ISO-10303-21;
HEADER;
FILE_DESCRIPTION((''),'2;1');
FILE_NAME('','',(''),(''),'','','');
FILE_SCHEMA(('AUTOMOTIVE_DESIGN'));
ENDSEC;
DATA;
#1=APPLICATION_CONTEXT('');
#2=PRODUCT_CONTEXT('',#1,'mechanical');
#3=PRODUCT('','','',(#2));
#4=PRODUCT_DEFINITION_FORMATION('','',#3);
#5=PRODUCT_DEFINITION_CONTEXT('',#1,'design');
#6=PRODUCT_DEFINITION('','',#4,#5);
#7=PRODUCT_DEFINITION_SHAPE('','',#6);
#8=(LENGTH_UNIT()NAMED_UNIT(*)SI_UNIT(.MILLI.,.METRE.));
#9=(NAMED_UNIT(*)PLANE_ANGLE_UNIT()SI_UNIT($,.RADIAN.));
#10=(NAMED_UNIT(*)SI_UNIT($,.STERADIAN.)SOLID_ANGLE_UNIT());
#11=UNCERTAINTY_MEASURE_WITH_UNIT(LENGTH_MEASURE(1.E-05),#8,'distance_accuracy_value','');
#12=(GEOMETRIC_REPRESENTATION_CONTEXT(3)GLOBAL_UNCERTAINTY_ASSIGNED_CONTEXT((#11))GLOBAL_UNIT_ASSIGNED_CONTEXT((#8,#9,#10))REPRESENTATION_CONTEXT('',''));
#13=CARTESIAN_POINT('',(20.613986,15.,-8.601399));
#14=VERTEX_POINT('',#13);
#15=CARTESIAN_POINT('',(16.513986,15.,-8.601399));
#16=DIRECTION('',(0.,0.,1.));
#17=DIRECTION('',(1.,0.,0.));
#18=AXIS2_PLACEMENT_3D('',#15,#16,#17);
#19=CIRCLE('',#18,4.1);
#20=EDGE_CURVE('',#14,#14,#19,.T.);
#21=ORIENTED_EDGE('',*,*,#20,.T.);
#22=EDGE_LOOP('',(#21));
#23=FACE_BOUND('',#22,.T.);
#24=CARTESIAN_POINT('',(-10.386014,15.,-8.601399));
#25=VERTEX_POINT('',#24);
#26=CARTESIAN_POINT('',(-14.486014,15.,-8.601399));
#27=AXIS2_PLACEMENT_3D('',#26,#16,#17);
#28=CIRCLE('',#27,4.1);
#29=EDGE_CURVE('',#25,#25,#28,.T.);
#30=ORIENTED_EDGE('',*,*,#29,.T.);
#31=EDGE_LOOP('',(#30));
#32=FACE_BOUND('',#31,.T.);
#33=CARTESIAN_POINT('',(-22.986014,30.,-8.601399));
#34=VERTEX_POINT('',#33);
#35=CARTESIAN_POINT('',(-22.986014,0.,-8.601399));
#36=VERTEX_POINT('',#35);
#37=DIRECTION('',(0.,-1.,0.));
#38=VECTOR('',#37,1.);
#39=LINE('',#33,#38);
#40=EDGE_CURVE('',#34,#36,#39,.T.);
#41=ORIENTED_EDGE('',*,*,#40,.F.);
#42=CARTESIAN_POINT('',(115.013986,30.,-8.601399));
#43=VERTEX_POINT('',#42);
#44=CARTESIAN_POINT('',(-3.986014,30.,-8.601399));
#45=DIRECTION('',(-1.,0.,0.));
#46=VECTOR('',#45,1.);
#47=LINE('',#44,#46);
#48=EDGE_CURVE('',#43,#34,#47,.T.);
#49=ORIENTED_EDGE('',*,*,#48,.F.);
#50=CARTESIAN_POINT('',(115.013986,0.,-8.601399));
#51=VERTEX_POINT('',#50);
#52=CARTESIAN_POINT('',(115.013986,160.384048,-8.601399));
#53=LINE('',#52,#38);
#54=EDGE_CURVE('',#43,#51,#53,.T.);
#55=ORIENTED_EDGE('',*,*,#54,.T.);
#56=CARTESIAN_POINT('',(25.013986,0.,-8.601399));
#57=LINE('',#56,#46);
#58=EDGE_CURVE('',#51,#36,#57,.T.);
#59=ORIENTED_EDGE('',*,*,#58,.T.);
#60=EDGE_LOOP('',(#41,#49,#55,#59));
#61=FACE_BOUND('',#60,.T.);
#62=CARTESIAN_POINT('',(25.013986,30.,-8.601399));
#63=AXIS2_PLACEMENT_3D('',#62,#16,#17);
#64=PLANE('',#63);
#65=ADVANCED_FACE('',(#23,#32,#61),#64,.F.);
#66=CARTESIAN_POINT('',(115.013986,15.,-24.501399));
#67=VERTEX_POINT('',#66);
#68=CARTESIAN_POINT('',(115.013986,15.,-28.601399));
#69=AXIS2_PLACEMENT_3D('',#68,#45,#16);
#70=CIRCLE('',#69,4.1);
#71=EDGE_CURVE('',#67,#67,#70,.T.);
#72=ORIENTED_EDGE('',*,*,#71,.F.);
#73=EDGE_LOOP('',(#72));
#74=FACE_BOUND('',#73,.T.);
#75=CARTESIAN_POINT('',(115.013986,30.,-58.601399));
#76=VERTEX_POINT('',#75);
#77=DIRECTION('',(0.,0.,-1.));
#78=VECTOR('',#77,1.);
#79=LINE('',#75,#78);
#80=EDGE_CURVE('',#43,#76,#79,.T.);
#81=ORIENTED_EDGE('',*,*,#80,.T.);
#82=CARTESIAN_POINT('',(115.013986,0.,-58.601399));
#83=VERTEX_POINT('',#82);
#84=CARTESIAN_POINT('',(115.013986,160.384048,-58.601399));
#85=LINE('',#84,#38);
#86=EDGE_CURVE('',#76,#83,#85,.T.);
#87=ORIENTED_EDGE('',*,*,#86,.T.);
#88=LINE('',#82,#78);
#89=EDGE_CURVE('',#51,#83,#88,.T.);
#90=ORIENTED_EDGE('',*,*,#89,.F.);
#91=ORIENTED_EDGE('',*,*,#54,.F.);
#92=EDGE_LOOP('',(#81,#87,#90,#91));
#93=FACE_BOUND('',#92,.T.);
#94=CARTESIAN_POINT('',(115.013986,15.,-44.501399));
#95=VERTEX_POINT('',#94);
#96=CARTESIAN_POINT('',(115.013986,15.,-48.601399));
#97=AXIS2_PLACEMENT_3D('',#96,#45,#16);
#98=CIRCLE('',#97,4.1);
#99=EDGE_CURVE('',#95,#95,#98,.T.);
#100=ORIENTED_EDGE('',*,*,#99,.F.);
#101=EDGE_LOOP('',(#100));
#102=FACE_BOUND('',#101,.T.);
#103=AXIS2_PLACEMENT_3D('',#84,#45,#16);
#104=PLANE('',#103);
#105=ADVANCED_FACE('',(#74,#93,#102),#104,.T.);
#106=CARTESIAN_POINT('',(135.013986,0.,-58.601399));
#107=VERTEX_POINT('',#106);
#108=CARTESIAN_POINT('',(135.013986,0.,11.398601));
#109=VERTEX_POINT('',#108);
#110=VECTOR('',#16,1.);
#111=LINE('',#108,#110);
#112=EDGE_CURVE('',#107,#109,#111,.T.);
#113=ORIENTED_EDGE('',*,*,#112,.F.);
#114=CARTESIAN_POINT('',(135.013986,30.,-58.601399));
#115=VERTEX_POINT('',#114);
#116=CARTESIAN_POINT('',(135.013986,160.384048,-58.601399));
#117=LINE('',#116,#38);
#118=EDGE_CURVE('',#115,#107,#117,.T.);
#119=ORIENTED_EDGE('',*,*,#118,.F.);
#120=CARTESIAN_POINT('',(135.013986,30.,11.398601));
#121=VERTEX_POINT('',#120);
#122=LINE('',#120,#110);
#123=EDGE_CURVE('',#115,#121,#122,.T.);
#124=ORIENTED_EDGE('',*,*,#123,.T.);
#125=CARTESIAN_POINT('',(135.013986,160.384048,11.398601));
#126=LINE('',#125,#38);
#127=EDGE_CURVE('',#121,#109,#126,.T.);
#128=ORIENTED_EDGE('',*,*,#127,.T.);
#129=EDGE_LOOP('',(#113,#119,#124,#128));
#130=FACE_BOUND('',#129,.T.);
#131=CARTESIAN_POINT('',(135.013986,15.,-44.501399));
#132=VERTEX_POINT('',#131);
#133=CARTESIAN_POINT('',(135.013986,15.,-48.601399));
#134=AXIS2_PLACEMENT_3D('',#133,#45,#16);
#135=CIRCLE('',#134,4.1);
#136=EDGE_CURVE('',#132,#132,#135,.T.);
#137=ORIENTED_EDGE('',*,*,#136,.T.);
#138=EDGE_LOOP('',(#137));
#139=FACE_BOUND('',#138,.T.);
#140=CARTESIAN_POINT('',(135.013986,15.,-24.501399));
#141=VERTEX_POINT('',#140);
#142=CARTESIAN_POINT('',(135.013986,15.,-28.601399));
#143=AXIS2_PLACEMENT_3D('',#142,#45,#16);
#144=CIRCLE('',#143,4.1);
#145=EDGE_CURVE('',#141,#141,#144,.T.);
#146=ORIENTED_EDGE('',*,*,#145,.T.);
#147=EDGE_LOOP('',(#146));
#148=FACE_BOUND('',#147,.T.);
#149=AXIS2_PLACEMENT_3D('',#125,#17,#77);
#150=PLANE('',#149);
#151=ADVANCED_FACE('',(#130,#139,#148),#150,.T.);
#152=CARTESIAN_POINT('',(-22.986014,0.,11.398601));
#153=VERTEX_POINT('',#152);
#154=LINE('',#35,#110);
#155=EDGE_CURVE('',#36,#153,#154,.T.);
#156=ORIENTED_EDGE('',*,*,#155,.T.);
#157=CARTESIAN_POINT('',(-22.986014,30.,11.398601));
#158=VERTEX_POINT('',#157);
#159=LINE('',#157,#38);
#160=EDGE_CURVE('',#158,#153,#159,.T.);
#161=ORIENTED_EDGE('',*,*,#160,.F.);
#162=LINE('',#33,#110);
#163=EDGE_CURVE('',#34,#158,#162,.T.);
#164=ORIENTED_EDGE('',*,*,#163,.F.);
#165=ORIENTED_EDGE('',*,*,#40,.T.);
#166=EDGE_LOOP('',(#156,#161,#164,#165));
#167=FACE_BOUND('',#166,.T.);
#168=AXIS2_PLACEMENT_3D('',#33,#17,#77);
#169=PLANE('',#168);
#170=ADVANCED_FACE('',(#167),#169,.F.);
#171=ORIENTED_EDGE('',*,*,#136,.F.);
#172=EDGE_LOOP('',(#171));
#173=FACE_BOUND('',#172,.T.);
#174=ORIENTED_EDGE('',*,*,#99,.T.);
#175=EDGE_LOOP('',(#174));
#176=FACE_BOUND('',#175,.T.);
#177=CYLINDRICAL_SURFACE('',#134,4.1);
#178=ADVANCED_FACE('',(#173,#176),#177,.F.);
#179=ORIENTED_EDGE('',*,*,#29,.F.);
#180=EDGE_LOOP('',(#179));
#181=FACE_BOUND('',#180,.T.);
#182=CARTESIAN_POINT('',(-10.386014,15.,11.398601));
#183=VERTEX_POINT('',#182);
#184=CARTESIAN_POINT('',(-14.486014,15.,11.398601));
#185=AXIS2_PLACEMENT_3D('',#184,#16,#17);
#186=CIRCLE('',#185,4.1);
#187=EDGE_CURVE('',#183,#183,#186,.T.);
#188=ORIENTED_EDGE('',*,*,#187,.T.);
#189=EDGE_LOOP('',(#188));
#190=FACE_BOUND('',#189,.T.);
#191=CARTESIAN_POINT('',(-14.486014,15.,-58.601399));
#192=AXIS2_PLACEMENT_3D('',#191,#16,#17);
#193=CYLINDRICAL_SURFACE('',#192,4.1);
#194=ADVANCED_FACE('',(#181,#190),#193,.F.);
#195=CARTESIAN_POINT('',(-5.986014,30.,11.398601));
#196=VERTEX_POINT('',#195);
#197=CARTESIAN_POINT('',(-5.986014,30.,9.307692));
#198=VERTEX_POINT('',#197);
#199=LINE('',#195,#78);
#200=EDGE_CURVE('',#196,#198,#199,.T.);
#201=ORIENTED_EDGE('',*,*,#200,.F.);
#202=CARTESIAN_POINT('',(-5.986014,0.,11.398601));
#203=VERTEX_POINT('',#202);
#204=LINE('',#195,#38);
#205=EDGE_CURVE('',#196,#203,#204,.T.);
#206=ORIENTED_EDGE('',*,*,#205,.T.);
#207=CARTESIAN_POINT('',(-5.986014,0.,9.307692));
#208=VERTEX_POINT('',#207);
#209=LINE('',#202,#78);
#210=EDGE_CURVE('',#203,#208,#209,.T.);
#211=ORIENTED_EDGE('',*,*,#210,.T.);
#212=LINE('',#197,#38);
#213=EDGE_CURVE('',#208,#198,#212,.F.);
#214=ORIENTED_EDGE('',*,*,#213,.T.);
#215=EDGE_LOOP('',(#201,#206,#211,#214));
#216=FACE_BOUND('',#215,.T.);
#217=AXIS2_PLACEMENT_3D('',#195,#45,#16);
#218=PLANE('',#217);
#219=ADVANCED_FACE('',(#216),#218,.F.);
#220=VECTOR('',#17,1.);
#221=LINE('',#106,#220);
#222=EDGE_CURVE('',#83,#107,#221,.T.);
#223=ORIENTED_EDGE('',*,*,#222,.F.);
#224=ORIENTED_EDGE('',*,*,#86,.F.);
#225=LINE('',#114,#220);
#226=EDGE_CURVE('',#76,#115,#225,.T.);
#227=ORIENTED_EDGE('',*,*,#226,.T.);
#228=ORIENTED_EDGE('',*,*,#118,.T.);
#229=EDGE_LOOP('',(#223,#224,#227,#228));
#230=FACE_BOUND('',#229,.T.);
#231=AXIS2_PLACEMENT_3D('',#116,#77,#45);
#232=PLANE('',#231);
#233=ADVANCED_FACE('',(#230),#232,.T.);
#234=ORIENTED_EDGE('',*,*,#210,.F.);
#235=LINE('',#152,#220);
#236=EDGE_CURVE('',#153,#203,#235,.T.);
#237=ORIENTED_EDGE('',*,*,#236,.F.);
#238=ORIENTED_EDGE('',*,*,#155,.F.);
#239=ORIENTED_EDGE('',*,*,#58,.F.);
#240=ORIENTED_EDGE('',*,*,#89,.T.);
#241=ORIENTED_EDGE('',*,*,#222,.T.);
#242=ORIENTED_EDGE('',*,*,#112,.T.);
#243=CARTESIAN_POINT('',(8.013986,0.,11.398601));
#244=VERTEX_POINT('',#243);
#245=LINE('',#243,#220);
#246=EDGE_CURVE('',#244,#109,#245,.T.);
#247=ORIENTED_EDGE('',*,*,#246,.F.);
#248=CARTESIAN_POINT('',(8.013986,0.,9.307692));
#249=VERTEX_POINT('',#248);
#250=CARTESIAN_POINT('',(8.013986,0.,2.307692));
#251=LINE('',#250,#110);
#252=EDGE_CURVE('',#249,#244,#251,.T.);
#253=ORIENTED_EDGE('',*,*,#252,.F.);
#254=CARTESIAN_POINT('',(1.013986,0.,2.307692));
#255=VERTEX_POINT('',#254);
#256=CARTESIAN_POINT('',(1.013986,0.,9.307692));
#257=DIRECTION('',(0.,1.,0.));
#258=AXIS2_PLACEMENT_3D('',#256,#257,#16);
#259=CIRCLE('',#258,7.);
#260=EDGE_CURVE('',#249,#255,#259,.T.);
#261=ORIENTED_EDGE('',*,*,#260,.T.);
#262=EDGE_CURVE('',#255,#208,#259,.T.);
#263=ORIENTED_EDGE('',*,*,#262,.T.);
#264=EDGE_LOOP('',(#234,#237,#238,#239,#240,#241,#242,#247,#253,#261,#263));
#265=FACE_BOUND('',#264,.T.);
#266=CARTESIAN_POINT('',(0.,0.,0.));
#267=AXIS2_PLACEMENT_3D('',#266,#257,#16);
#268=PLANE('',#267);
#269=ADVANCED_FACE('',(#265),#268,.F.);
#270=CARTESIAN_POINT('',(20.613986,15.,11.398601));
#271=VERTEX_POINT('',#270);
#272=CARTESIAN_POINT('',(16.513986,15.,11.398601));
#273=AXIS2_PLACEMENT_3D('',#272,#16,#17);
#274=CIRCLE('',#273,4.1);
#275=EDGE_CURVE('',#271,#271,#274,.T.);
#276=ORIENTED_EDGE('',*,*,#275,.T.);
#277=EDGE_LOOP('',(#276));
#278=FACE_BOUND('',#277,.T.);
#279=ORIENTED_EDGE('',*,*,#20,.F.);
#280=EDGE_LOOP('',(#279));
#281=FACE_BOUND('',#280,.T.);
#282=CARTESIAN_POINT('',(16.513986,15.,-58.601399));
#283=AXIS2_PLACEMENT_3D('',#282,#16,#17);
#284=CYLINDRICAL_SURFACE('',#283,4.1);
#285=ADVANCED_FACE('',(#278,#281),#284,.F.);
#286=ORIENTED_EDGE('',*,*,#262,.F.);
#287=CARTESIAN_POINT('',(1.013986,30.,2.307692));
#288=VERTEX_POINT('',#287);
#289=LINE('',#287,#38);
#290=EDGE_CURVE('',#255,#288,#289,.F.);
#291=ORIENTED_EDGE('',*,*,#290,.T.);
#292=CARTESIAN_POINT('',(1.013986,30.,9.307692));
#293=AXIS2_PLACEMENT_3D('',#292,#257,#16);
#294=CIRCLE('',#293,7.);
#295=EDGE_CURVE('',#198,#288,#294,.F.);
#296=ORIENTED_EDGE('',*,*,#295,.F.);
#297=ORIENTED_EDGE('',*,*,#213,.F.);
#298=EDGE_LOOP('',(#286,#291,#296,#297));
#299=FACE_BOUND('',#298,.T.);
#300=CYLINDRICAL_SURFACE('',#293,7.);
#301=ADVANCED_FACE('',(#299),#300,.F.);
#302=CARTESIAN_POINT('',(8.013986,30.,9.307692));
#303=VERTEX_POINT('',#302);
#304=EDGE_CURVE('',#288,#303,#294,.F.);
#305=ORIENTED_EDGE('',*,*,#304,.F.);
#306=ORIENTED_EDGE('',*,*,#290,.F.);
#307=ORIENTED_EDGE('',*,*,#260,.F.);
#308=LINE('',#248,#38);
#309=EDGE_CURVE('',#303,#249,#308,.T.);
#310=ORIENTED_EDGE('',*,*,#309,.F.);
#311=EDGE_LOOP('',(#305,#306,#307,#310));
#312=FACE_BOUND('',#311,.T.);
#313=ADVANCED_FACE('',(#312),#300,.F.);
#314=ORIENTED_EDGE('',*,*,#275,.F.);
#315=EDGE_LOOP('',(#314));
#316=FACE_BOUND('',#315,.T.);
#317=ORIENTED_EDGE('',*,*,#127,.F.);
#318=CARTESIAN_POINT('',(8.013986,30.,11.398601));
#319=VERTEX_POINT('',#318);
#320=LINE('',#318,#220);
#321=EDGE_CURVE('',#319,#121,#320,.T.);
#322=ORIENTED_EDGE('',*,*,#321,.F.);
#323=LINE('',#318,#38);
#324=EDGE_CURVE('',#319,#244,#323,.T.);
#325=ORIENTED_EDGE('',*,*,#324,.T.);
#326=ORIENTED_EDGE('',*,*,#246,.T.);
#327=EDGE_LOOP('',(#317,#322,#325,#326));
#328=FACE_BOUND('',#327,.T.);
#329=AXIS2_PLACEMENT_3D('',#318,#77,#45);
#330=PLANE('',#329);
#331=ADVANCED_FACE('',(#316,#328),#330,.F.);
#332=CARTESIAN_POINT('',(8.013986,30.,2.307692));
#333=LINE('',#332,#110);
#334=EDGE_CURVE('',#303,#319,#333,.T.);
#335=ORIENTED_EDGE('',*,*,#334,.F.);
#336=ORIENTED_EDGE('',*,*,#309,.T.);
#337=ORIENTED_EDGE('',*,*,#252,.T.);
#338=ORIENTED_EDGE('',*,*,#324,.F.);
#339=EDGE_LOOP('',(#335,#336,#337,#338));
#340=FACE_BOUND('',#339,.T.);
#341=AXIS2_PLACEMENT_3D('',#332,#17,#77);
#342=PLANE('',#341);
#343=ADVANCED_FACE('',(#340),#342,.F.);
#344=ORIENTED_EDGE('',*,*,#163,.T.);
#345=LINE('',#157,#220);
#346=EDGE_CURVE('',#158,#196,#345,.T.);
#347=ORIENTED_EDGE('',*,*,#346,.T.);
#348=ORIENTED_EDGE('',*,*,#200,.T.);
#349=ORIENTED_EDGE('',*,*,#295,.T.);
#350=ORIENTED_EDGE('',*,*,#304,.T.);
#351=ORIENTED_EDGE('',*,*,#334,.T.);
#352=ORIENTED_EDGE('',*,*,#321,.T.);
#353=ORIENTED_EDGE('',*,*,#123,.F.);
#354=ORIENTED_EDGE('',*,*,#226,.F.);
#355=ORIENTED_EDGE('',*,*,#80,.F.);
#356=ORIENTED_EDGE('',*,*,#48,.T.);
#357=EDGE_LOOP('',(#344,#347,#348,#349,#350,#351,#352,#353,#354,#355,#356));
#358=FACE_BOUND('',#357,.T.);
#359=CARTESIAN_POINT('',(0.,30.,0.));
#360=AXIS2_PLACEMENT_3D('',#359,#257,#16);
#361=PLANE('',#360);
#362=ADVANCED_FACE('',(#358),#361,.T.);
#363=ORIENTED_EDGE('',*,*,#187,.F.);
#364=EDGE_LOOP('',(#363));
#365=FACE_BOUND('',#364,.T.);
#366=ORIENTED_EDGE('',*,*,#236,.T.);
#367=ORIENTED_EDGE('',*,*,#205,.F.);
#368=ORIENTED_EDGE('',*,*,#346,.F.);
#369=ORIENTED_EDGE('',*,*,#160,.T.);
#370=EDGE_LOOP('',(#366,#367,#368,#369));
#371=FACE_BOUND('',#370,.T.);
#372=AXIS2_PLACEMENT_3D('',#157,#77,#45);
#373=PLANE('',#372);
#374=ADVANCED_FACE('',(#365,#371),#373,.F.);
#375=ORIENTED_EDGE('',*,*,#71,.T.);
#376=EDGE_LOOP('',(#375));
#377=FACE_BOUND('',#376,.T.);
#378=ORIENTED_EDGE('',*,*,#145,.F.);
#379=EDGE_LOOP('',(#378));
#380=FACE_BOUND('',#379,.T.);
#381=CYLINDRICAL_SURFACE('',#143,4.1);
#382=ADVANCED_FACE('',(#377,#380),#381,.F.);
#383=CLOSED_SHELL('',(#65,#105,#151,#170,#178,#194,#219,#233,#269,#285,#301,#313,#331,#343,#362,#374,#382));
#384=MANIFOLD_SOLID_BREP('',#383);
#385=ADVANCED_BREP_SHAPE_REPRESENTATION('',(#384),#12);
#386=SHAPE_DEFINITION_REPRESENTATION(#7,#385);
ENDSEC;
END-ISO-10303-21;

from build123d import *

# Parameters (mm, degrees)
BOSS_EXTRUDE1_DEPTH = 30
SKETCH3_R           = 4.1
CUT_EXTRUDE1_DEPTH  = 81.160460929
SKETCH4_R           = 4.1
CUT_EXTRUDE2_DEPTH  = 72.938334134
FILLET1_R           = 7
BOSS_EXTRUDE2_DEPTH = 30
SKETCH7_R           = 4.1
CUT_EXTRUDE3_DEPTH  = 154.802223385
SKETCH8_W           = 10
SKETCH8_H           = 50
CUT_EXTRUDE4_DEPTH  = 151.209521461


with BuildPart() as part:
    # Sketch1 → Boss-Extrude1 (new body)
    with BuildSketch(Plane(origin=(0, 0, 0), x_dir=(1, 0, 0), z_dir=(0, 1, 0))):
        Polygon((-22.986013986, 8.601398601), (-22.986013986, -11.398601399), (-5.986013986, -11.398601399), (-5.986013986, -2.307692308), (8.013986014, -2.307692308), (8.013986014, -11.398601399), (25.013986014, -11.398601399), (25.013986014, 8.601398601), (6.013986014, 8.601398601), (6.013986014, 58.601398601), (-3.986013986, 58.601398601), (-3.986013986, 8.601398601), align=None)
    extrude(amount=BOSS_EXTRUDE1_DEPTH)

    # Sketch3 → Cut-Extrude1 (cut, through all)
    with BuildSketch(Plane.XY.offset(11.398601399)):
        with Locations((-14.486013986, 15)):
            Circle(SKETCH3_R)
        with Locations((16.513986014, 15)):
            Circle(SKETCH3_R)
    extrude(amount=-CUT_EXTRUDE1_DEPTH, mode=Mode.SUBTRACT)

    # Sketch4 → Cut-Extrude2 (cut, through all)
    with BuildSketch(Plane(origin=(6.013986014, 0, 0), x_dir=(0, 0, -1), z_dir=(1, 0, 0))):
        with Locations((28.601398601, 15)):
            Circle(SKETCH4_R)
        with Locations((48.601398601, 15)):
            Circle(SKETCH4_R)
    extrude(amount=-CUT_EXTRUDE2_DEPTH, mode=Mode.SUBTRACT)

    # Fillet1
    fillet1_edges = [part.edges().sort_by_distance(p)[0] for p in [
        (-5.986013986, 15, 2.307692308),
        (8.013986014, 15, 2.307692308),
    ]]
    fillet(fillet1_edges, radius=FILLET1_R - 0.0001)  # a hair under: the kernel refuses the full size

    # Sketch6 → Boss-Extrude2 (add)
    with BuildSketch(Plane.XZ):
        Polygon((25.013986014, 11.398601399), (135.013986014, 11.398601399), (135.013986014, -58.601398601), (115.013986014, -58.601398601), (115.013986014, -8.601398601), (25.013986014, -8.601398601), align=None)
    extrude(amount=-BOSS_EXTRUDE2_DEPTH)

    # Sketch7 → Cut-Extrude3 (cut, through all)
    with BuildSketch(Plane.ZY.offset(3.986013986)):
        with Locations(Location((-48.601398601, 15, 0), (0, 0, 180))):
            Circle(SKETCH7_R)
        with Locations(Location((-28.601398601, 15, 0), (0, 0, 180))):
            Circle(SKETCH7_R)
    extrude(amount=-CUT_EXTRUDE3_DEPTH, mode=Mode.SUBTRACT)

    # Sketch8 → Cut-Extrude4 (cut, through all)
    with BuildSketch(Plane(origin=(0, 30, 0), x_dir=(1, 0, 0), z_dir=(0, 1, 0))):
        with Locations((1.013986014, 33.601398601)):
            Rectangle(SKETCH8_W, SKETCH8_H)
    extrude(amount=-CUT_EXTRUDE4_DEPTH, mode=Mode.SUBTRACT)


solid = part.part
